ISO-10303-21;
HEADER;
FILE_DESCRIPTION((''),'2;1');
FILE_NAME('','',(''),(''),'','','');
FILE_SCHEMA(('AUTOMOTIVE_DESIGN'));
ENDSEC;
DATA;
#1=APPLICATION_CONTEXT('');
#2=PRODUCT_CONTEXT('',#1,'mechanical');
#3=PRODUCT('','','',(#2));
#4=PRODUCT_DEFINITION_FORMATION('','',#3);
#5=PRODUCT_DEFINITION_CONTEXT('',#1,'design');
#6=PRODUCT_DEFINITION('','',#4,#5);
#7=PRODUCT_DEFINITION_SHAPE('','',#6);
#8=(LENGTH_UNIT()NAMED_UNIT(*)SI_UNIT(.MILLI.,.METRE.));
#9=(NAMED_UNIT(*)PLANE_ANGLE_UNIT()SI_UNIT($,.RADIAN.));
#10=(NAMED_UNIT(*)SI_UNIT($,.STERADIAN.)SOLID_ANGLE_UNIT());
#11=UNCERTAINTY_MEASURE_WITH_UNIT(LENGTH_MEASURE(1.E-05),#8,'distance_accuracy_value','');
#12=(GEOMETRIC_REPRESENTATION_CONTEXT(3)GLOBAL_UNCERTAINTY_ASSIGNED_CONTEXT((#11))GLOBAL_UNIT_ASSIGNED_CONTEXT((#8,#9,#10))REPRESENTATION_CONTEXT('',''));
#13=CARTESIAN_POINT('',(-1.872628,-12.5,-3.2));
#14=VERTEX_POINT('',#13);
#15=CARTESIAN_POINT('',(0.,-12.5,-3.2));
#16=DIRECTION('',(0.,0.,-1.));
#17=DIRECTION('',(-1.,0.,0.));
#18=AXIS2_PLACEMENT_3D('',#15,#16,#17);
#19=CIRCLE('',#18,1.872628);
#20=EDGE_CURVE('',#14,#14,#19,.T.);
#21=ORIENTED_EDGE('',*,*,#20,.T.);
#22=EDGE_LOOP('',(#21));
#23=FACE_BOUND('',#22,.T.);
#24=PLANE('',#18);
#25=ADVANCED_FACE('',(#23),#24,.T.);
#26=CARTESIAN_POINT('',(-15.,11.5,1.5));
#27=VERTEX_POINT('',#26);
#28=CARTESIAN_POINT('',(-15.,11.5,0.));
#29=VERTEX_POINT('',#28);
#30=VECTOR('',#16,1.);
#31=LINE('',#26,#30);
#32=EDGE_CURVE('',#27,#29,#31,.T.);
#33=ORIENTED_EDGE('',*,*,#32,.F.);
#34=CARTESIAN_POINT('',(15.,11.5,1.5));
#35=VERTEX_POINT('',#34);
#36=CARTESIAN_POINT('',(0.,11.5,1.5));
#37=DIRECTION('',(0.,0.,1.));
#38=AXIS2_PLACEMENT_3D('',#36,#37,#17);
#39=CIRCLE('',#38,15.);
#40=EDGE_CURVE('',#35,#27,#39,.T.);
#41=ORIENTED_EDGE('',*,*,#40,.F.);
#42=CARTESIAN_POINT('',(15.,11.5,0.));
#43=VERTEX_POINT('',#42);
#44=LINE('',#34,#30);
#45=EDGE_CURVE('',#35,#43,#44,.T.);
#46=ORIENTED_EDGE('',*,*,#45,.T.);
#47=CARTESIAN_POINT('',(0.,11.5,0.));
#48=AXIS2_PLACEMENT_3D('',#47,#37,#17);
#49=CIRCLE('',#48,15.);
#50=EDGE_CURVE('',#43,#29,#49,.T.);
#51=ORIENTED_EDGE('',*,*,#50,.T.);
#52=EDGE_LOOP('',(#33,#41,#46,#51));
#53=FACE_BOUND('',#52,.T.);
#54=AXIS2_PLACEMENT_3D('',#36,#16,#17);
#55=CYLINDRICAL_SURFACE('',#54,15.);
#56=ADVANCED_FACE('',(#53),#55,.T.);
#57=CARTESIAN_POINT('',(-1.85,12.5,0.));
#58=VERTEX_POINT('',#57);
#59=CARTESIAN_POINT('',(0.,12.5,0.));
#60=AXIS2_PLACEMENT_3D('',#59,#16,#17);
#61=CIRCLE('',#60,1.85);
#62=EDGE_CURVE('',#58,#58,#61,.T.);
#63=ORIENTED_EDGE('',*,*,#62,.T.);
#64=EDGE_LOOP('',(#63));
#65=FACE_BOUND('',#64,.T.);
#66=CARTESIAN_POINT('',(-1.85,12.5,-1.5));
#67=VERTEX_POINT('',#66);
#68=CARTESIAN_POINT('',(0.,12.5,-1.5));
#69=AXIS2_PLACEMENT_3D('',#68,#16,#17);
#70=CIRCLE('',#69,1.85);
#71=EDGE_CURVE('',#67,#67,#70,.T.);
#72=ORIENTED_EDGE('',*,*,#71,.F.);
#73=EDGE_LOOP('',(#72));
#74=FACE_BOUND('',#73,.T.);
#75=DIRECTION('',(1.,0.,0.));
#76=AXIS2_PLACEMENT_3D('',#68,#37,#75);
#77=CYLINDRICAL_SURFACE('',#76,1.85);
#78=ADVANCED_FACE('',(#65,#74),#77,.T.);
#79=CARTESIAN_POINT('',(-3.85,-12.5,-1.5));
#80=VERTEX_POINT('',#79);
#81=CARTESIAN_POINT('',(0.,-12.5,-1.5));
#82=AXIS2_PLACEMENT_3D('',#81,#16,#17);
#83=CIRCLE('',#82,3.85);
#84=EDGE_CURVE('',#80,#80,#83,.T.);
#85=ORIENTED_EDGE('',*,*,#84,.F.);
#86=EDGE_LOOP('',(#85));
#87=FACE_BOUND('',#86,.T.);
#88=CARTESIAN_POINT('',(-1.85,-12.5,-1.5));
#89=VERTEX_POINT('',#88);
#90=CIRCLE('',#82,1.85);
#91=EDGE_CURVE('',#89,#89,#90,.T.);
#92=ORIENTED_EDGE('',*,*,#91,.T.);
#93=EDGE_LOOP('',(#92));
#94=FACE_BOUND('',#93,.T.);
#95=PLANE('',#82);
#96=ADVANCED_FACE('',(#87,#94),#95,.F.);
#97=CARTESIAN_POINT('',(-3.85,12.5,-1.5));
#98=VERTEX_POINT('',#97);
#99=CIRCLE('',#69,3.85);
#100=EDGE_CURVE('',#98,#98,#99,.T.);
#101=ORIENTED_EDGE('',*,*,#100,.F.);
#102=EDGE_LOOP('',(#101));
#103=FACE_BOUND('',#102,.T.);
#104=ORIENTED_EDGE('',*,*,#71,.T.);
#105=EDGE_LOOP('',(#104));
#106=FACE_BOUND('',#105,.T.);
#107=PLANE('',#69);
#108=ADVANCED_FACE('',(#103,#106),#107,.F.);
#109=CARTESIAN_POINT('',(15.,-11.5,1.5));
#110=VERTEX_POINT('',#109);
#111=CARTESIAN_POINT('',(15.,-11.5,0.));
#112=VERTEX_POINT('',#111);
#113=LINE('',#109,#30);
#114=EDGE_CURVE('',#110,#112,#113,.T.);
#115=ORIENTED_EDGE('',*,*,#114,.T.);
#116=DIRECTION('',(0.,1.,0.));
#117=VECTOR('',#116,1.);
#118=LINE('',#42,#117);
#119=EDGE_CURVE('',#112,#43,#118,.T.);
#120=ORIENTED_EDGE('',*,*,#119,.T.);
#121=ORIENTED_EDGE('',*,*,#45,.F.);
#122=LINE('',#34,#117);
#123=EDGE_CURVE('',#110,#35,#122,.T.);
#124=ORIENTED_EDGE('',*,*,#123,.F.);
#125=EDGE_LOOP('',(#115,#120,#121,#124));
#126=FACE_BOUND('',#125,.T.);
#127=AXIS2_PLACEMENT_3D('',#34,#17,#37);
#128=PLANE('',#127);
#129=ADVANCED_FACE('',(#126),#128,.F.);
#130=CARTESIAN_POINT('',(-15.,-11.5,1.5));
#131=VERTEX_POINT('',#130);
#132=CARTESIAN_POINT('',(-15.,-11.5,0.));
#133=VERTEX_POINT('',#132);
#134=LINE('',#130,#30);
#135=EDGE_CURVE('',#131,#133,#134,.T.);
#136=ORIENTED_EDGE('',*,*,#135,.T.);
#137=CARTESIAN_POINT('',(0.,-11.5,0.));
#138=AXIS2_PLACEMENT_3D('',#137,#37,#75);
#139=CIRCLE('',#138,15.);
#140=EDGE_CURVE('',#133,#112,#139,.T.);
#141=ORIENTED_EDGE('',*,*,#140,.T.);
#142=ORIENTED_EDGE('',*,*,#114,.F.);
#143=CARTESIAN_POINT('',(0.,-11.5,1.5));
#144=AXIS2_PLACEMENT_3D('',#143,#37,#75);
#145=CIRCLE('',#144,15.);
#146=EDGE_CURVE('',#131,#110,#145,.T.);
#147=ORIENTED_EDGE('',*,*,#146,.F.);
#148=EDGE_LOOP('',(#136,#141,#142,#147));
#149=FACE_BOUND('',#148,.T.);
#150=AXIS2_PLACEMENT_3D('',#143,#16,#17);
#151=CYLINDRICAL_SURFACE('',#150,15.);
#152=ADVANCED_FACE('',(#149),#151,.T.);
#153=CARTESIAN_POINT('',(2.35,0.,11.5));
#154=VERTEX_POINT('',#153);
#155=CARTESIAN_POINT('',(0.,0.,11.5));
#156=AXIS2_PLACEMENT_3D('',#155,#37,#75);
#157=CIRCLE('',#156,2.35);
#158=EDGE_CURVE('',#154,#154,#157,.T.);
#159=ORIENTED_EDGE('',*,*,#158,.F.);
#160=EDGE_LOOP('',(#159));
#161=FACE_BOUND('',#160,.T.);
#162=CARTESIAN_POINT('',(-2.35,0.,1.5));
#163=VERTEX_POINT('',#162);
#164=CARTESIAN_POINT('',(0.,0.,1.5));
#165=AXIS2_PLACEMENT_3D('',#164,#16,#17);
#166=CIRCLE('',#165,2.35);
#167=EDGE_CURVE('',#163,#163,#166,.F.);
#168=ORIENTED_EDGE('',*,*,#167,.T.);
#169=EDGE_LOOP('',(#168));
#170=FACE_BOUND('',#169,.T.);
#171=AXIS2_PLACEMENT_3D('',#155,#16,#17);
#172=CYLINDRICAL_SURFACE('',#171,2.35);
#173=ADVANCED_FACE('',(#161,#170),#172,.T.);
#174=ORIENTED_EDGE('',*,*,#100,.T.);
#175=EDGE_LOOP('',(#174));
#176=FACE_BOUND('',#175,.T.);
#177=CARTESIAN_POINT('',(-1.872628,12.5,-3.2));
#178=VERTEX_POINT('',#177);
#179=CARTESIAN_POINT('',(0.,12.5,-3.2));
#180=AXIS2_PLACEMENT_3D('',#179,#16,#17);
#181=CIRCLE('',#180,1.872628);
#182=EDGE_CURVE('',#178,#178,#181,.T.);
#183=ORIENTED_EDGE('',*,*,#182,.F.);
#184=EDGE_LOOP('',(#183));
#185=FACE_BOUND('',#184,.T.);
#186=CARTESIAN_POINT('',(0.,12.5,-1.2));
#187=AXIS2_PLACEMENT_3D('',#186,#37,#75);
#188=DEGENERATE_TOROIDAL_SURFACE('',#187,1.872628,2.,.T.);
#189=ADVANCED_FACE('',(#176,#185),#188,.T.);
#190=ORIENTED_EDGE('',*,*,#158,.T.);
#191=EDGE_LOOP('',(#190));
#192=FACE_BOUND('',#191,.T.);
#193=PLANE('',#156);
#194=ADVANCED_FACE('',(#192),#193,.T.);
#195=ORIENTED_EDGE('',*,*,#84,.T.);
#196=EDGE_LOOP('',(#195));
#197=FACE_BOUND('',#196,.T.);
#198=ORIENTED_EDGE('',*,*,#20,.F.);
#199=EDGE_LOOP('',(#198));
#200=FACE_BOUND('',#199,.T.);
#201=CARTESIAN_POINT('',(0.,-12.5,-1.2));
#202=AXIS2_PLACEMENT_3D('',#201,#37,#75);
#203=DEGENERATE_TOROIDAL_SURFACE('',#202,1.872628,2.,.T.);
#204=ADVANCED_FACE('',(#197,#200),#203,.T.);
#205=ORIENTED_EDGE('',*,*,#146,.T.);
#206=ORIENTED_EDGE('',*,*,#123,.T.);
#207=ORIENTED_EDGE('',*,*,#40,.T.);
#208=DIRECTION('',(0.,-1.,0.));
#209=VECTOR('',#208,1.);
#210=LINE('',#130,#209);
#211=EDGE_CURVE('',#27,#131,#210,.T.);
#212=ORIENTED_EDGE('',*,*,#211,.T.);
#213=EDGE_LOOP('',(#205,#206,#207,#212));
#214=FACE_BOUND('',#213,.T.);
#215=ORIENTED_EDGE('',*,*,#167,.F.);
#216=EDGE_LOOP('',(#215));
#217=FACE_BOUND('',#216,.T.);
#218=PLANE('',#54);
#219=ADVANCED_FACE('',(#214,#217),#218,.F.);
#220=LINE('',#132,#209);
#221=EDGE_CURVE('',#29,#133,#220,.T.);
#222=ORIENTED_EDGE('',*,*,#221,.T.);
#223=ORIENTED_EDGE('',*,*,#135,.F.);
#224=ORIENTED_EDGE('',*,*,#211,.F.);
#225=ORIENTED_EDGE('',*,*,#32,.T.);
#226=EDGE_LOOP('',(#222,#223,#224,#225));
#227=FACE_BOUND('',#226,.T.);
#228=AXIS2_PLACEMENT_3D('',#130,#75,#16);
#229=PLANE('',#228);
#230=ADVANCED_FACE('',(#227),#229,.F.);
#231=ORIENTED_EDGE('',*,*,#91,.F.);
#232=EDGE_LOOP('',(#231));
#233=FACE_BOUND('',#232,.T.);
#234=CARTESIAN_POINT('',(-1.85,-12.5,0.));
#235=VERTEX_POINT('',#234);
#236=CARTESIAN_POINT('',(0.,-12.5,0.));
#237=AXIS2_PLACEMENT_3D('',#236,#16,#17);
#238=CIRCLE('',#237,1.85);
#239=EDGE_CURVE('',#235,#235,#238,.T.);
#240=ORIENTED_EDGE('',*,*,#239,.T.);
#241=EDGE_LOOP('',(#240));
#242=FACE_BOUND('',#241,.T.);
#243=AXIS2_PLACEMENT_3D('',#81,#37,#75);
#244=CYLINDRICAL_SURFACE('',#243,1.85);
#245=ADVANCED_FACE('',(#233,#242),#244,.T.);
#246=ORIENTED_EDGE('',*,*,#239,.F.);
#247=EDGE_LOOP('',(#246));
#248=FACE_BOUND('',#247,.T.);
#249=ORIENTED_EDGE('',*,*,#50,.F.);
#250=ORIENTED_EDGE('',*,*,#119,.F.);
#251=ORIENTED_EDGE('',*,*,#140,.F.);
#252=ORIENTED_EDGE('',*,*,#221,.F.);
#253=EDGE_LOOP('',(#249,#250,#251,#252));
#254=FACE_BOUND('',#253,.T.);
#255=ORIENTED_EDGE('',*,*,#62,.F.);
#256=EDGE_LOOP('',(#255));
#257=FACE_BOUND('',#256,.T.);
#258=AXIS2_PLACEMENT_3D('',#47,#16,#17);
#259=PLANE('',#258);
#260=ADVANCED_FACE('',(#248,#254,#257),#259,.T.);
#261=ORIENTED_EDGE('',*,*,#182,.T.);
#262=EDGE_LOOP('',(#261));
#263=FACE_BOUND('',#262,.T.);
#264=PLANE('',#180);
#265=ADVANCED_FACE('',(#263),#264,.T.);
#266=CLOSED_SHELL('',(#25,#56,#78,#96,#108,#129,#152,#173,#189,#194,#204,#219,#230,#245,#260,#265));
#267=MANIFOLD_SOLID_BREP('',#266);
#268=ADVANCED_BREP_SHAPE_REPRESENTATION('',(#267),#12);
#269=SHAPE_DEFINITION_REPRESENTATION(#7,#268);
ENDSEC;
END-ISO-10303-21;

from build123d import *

# Parameters (mm, degrees)
DODANIE_WYCI_GNI_CIE2_DEPTH = 1.5
SZKIC37_R                   = 1.85
DODANIE_WYCI_GNI_CIE3_DEPTH = 1.5
SZKIC38_R                   = 3.85
DODANIE_WYCI_GNI_CIE4_DEPTH = 1.7
ZAOKR_GLENIE1_R             = 2
SZKIC39_R                   = 2.35
DODANIE_WYCI_GNI_CIE5_DEPTH = 10


with BuildPart() as part:
    # Szkic35 → Dodanie-wyciągnięcie2 (new body)
    with BuildSketch(Plane.XY):
        with BuildLine():
            Line((-15, -11.5), (-15, 11.5))
            ThreePointArc((-15, 11.5), (0, 26.5), (15, 11.5))
            Line((15, 11.5), (15, -11.5))
            ThreePointArc((15, -11.5), (0, -26.5), (-15, -11.5))
        make_face()
    extrude(amount=DODANIE_WYCI_GNI_CIE2_DEPTH)

    # Szkic37 → Dodanie-wyciągnięcie3 (add)
    with BuildSketch(Plane(origin=(0, 0, 0), x_dir=(-1, 0, 0), z_dir=(0, 0, -1))):
        with Locations((0, 12.5)):
            Circle(SZKIC37_R)
        with Locations((0, -12.5)):
            Circle(SZKIC37_R)
    extrude(amount=DODANIE_WYCI_GNI_CIE3_DEPTH)

    # Szkic38 → Dodanie-wyciągnięcie4 (add)
    with BuildSketch(Plane(origin=(0, 0, -1.5), x_dir=(-1, 0, 0), z_dir=(0, 0, -1))):
        with Locations((0, 12.5)):
            Circle(SZKIC38_R)
        with Locations((0, -12.5)):
            Circle(SZKIC38_R)
    extrude(amount=DODANIE_WYCI_GNI_CIE4_DEPTH)

    # Zaokrąglenie1
    # the kernel refuses this fillet: 2 mm, written as the material it takes off along each edge
    with BuildSketch(Plane(origin=(0, 12.5, -3.2), x_dir=(-1, 0, 0), z_dir=(0, -1, 0))) as zaokr_glenie1_piece_1:
        with BuildLine():
            CenterArc((1.872628007, -2), ZAOKR_GLENIE1_R, 8.626926559, 81.373073441)
            Line((1.872628007, 0), (1.872628007, 0.04))
            Line((1.872628007, 0.04), (3.85, 0.04))
            Line((3.85, 0.04), (3.89, 0))
            ThreePointArc((3.89, 0), (3.89, -0.85), (3.88954744, -1.694))
            Line((3.88954744, -1.694), (3.85, -1.7))
        make_face()
    revolve(axis=Axis((0, 12.5, -3.2), (0, 0, -1)), mode=Mode.SUBTRACT)
    with BuildSketch(Plane(origin=(0, -12.5, -3.2), x_dir=(-1, 0, 0), z_dir=(0, -1, 0))) as zaokr_glenie1_piece_2:
        with BuildLine():
            CenterArc((1.872628007, -2), ZAOKR_GLENIE1_R, 8.626926559, 81.373073441)
            Line((1.872628007, 0), (1.872628007, 0.04))
            Line((1.872628007, 0.04), (3.85, 0.04))
            Line((3.85, 0.04), (3.89, 0))
            ThreePointArc((3.89, 0), (3.89, -0.85), (3.88954744, -1.694))
            Line((3.88954744, -1.694), (3.85, -1.7))
        make_face()
    revolve(axis=Axis((0, -12.5, -3.2), (0, 0, -1)), mode=Mode.SUBTRACT)

    # Szkic39 → Dodanie-wyciągnięcie5 (add)
    with BuildSketch(Plane.XY.offset(1.5)):
        with Locations(Location((0, 0, 0), (0, 0, 180))):
            Circle(SZKIC39_R)
    extrude(amount=DODANIE_WYCI_GNI_CIE5_DEPTH)


solid = part.part
